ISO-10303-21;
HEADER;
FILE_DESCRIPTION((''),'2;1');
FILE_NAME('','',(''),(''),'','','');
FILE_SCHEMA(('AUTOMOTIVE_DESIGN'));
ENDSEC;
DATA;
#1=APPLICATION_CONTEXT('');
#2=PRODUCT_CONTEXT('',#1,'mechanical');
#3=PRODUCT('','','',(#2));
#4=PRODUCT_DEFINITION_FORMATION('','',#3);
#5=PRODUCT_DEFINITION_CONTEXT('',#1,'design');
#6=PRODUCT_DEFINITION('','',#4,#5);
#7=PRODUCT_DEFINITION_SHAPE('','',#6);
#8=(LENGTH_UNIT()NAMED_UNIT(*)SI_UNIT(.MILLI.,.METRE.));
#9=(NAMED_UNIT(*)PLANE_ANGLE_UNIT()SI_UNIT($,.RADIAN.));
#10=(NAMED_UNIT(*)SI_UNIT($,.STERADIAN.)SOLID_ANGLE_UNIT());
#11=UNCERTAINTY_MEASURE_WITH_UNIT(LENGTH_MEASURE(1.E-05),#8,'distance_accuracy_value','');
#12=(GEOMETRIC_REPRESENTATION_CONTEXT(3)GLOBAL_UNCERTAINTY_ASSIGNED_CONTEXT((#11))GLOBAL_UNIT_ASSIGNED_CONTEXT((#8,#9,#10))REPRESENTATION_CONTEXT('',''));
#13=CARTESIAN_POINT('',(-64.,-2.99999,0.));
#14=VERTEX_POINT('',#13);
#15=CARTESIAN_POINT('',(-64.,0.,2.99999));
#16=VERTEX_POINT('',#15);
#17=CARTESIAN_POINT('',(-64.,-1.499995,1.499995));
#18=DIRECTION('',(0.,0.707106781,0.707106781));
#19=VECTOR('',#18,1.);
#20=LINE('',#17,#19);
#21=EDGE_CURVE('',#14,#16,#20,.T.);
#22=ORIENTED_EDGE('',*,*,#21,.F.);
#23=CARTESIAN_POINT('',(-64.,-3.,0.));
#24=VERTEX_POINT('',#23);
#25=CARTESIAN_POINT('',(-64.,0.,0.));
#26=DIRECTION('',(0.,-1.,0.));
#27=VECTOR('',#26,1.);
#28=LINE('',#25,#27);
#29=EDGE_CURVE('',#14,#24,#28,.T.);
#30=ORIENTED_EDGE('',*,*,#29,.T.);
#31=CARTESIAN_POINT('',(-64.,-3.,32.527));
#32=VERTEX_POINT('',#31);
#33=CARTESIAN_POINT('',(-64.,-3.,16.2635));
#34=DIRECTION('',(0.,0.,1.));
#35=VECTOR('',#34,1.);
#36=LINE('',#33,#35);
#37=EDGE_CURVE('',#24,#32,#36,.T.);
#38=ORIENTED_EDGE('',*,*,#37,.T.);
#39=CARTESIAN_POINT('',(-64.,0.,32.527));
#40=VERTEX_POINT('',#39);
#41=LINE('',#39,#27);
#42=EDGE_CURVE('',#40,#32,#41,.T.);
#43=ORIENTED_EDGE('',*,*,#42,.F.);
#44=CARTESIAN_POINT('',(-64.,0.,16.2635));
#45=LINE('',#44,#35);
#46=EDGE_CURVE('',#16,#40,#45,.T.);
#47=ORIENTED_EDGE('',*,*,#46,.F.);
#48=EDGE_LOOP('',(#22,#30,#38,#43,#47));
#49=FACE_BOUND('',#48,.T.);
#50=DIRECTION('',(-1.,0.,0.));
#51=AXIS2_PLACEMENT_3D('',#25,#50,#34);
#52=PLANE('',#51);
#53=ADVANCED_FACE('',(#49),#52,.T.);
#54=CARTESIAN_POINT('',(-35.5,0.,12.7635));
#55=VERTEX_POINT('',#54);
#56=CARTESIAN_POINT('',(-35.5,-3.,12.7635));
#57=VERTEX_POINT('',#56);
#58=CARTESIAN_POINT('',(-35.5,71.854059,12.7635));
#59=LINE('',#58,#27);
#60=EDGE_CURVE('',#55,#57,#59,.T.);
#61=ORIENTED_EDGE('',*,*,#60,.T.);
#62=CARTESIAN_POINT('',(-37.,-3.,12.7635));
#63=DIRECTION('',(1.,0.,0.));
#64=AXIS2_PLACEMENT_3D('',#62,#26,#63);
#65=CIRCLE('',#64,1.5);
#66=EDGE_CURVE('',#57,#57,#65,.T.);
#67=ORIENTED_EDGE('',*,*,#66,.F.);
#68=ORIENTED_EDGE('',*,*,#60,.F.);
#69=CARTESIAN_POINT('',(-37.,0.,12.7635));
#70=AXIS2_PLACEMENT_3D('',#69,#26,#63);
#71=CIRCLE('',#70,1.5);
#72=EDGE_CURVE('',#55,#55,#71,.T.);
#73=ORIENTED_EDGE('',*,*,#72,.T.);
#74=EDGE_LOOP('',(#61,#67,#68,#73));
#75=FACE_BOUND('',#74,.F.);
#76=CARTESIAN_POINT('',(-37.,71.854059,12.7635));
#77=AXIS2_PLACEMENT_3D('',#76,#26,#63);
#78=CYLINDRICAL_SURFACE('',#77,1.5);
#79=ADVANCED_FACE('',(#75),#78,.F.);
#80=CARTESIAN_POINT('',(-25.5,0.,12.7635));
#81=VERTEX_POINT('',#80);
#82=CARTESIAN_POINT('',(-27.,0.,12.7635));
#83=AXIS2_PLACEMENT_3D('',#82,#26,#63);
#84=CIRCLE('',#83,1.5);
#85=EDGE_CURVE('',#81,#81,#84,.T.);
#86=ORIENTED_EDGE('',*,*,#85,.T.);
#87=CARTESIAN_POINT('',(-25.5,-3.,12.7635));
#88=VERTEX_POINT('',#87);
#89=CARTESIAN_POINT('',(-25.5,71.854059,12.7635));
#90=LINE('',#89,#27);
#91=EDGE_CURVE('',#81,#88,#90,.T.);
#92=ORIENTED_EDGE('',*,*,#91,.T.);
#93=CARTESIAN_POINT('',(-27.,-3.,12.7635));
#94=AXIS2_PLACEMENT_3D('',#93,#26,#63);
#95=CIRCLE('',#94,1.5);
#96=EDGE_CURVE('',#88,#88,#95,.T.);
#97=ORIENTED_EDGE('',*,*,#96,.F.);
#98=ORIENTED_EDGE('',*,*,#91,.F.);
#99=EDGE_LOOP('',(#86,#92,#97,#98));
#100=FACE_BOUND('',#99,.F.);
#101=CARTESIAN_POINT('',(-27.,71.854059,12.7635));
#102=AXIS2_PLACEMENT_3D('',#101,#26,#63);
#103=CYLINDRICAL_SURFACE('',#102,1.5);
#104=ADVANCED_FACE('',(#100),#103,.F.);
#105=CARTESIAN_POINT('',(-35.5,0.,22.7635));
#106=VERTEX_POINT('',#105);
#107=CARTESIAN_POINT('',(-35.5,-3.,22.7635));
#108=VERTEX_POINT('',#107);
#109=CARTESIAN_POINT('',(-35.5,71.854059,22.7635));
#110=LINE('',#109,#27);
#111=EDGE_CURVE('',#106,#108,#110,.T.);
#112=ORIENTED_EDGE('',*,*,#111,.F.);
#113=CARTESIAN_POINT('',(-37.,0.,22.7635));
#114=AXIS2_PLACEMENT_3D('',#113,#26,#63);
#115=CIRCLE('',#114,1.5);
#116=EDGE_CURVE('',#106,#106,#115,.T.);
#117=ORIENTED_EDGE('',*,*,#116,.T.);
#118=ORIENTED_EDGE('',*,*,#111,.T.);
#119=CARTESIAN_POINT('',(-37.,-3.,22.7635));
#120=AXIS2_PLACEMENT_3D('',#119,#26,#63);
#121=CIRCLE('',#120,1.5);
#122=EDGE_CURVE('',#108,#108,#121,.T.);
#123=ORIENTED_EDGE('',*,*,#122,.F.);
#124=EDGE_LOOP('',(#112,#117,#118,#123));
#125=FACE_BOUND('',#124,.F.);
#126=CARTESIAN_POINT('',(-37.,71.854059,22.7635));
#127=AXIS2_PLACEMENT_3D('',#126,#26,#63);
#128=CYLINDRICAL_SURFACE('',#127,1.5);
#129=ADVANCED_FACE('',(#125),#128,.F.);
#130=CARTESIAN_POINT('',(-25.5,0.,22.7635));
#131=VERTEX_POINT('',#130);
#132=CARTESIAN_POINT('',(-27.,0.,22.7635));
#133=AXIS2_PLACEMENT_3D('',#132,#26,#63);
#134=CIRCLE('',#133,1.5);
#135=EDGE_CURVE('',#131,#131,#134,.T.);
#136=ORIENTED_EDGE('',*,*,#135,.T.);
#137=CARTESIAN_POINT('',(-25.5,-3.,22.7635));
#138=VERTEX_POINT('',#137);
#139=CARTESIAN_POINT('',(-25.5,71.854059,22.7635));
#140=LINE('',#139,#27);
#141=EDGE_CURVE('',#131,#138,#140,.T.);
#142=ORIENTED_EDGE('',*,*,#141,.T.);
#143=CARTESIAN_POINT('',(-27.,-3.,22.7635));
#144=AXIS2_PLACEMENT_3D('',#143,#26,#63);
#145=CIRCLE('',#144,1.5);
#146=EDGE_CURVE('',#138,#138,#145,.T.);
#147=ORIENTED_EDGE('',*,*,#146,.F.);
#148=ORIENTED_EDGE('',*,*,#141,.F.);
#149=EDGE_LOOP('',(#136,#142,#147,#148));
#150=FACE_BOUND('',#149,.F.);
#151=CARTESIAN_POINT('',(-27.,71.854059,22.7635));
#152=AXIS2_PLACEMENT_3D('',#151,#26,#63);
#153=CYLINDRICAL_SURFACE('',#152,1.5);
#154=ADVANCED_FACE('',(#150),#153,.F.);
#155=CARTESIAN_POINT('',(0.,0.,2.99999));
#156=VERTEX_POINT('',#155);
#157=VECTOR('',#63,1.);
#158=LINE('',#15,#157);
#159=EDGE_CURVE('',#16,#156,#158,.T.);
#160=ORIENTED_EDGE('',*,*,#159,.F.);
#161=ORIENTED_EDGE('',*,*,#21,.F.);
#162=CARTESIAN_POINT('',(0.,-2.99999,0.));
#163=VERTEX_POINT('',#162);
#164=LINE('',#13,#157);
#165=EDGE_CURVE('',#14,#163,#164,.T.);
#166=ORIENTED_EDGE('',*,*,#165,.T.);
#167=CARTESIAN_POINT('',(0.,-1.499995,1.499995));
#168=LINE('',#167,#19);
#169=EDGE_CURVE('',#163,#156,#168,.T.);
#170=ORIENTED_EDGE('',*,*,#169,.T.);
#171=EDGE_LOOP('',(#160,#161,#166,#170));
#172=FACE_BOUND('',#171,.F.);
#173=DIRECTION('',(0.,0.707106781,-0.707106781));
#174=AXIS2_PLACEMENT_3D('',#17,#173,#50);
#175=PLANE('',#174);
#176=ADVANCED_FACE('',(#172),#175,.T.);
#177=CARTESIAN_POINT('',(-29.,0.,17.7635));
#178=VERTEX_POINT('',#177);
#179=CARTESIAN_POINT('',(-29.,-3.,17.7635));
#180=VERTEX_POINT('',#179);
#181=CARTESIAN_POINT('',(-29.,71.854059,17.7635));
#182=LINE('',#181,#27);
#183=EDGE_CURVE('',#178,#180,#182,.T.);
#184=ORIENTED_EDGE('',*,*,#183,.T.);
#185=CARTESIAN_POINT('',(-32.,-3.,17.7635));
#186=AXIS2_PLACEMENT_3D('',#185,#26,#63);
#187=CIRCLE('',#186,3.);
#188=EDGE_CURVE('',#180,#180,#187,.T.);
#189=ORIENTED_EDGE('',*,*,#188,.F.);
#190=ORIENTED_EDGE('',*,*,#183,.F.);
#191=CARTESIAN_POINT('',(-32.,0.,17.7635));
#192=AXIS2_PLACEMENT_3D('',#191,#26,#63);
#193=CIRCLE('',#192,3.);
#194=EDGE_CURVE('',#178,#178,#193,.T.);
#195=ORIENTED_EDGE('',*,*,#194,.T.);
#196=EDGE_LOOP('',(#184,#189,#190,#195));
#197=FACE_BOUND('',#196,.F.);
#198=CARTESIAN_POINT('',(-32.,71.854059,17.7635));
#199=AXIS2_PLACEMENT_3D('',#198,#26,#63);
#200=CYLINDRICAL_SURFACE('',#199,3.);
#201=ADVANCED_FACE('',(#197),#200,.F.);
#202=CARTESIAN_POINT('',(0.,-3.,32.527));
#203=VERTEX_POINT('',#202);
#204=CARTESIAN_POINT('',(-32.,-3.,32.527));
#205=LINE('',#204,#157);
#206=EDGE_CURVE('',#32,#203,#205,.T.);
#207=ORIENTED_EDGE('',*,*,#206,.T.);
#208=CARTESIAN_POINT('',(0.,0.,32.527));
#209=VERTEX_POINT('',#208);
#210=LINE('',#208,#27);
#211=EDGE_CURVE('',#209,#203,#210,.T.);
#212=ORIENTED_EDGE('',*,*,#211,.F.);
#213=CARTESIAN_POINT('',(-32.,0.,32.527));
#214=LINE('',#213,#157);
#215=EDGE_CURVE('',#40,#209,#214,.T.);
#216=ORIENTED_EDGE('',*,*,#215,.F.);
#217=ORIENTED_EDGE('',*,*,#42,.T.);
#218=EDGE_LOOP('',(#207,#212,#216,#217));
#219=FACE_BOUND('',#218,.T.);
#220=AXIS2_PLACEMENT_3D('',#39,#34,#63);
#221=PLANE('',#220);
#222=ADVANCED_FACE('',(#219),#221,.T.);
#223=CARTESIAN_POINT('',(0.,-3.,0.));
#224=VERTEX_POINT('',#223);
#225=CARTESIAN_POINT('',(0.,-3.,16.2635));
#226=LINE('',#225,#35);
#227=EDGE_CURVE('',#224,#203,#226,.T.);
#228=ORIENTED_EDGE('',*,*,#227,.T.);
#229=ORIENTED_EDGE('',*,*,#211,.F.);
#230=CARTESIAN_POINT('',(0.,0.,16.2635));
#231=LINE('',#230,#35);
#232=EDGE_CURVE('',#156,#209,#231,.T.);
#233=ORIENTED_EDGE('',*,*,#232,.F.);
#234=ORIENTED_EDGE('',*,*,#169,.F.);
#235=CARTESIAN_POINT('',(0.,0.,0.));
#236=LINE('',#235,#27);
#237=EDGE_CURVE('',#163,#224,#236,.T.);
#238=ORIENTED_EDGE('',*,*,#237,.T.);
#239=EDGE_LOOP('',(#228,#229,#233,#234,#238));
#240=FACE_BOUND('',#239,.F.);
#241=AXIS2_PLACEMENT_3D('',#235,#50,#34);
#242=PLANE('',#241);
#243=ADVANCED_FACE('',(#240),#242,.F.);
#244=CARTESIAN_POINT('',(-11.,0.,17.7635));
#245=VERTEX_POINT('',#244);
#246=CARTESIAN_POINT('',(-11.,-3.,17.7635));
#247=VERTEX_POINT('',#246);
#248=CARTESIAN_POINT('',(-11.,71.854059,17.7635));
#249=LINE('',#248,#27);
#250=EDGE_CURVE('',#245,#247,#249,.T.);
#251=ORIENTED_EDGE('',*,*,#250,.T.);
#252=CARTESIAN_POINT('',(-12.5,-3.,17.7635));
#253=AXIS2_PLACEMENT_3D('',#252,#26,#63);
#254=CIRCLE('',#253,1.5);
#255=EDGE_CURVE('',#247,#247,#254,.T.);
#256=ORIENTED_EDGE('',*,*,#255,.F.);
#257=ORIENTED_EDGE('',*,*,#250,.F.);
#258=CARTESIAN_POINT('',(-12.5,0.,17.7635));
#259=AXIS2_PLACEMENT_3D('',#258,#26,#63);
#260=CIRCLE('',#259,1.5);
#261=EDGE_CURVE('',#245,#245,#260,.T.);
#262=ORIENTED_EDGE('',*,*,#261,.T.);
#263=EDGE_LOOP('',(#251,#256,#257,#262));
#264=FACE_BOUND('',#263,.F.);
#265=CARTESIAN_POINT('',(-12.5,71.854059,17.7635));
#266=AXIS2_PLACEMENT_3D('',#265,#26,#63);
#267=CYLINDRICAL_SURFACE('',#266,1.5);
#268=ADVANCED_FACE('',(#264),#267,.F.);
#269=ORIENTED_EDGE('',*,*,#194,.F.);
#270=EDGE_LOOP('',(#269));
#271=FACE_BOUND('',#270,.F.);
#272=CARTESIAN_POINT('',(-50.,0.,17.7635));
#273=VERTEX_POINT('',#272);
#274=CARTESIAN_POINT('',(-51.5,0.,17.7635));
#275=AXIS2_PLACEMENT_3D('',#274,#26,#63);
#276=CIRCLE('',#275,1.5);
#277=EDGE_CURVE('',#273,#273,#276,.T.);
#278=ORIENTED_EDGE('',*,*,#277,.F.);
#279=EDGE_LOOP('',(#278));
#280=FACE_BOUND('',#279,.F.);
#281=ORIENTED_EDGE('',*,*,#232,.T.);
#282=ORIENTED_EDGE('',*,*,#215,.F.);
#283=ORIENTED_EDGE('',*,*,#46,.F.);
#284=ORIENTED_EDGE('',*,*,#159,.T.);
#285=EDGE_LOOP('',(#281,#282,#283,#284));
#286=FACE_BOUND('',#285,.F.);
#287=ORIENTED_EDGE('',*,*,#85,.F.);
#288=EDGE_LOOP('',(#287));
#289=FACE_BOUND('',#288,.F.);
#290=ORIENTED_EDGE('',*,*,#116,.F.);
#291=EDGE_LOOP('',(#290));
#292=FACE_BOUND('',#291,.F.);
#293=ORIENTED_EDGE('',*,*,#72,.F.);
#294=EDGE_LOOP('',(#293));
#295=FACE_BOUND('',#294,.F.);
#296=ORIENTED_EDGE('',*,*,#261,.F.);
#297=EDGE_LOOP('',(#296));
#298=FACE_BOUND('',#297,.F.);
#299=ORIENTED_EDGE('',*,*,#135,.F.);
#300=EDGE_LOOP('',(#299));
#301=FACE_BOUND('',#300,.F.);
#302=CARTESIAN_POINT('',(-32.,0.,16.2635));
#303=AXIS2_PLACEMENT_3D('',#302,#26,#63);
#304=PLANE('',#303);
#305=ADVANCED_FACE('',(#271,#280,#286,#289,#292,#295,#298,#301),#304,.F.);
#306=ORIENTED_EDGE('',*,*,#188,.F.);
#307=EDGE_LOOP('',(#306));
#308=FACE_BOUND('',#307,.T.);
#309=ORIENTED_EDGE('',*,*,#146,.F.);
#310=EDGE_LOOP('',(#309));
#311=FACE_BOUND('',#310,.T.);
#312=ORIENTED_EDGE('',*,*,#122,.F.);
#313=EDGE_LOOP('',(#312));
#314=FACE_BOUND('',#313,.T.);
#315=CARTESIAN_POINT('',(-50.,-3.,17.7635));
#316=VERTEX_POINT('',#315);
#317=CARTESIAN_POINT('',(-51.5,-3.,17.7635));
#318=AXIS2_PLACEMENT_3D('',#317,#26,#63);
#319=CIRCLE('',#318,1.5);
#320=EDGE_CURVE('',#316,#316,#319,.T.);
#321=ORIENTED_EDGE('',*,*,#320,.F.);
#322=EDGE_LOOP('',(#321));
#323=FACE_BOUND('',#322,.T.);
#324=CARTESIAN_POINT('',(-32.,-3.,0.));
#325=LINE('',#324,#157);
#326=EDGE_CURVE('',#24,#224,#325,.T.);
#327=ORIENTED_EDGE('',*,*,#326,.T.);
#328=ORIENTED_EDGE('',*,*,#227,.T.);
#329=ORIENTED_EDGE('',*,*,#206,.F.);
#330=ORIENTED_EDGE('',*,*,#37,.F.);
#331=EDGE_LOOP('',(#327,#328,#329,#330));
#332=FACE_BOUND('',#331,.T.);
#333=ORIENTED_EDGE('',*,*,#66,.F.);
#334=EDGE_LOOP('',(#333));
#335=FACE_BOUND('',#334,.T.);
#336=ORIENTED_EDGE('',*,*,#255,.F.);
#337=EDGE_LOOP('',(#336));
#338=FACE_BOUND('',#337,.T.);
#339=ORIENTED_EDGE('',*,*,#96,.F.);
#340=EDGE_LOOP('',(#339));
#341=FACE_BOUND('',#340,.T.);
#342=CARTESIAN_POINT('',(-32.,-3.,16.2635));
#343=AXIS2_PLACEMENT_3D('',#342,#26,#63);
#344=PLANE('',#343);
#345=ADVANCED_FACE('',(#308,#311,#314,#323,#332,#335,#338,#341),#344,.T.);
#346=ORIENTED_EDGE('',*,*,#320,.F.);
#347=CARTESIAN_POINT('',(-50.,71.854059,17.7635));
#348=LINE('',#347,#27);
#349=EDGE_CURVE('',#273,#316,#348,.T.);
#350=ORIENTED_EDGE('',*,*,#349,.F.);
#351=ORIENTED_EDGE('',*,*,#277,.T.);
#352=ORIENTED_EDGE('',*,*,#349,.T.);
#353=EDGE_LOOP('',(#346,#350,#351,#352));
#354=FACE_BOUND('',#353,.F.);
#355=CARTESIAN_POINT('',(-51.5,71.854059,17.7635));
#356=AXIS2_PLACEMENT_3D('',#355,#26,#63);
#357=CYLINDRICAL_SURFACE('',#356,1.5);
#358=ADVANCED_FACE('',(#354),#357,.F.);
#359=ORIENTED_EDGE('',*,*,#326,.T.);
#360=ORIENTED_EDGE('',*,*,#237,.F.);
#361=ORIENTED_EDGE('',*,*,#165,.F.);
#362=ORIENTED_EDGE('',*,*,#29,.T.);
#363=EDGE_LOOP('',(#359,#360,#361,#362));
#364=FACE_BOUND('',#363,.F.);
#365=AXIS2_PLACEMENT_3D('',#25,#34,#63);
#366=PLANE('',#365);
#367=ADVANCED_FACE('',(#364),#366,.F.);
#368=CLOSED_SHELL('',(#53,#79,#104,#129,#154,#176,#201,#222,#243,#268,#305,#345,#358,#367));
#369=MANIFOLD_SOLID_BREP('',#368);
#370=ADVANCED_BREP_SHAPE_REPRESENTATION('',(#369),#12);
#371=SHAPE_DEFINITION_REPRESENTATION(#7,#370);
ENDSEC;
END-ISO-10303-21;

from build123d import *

# Parameters (mm, degrees)
F0_W     = 64
F0_H     = 32.527
F1_DEPTH = 3
F2_SIZE  = 2.99999
F6_D     = 6
F7_D     = 3


# Not quite as in the source:
# - a fillet or chamfer is up to 0.001 mm smaller than in the source, because OpenCascade refuses the exact size


with BuildPart() as f1:
    # F0 (on Front) → F1 (new body)
    with BuildSketch(Plane.XZ):
        with Locations((-32, 16.2635)):
            Rectangle(F0_W, F0_H)
    extrude(amount=F1_DEPTH)

    # F2 (size 3 in the source; OpenCascade refuses exactly that, so slightly less here)
    f2_edges = [f1.edges().sort_by_distance(p)[0] for p in [
        (-32, 0, 0),
    ]]
    chamfer(f2_edges, length=F2_SIZE)

    # F6 (through all)
    with Locations(Plane(origin=(0, 0, 0), x_dir=(-1, 0, 0), z_dir=(0, 1, 0))):
        with Locations((32, 17.7635)):
            Hole(F6_D / 2)

    # F7 (through all)
    with Locations(Plane(origin=(0, 0, 0), x_dir=(-1, 0, 0), z_dir=(0, 1, 0))):
        with Locations((37, 22.7635), (27, 22.7635), (27, 12.7635), (37, 12.7635), (12.5, 17.7635), (51.5, 17.7635)):
            Hole(F7_D / 2)


solid = f1.part
